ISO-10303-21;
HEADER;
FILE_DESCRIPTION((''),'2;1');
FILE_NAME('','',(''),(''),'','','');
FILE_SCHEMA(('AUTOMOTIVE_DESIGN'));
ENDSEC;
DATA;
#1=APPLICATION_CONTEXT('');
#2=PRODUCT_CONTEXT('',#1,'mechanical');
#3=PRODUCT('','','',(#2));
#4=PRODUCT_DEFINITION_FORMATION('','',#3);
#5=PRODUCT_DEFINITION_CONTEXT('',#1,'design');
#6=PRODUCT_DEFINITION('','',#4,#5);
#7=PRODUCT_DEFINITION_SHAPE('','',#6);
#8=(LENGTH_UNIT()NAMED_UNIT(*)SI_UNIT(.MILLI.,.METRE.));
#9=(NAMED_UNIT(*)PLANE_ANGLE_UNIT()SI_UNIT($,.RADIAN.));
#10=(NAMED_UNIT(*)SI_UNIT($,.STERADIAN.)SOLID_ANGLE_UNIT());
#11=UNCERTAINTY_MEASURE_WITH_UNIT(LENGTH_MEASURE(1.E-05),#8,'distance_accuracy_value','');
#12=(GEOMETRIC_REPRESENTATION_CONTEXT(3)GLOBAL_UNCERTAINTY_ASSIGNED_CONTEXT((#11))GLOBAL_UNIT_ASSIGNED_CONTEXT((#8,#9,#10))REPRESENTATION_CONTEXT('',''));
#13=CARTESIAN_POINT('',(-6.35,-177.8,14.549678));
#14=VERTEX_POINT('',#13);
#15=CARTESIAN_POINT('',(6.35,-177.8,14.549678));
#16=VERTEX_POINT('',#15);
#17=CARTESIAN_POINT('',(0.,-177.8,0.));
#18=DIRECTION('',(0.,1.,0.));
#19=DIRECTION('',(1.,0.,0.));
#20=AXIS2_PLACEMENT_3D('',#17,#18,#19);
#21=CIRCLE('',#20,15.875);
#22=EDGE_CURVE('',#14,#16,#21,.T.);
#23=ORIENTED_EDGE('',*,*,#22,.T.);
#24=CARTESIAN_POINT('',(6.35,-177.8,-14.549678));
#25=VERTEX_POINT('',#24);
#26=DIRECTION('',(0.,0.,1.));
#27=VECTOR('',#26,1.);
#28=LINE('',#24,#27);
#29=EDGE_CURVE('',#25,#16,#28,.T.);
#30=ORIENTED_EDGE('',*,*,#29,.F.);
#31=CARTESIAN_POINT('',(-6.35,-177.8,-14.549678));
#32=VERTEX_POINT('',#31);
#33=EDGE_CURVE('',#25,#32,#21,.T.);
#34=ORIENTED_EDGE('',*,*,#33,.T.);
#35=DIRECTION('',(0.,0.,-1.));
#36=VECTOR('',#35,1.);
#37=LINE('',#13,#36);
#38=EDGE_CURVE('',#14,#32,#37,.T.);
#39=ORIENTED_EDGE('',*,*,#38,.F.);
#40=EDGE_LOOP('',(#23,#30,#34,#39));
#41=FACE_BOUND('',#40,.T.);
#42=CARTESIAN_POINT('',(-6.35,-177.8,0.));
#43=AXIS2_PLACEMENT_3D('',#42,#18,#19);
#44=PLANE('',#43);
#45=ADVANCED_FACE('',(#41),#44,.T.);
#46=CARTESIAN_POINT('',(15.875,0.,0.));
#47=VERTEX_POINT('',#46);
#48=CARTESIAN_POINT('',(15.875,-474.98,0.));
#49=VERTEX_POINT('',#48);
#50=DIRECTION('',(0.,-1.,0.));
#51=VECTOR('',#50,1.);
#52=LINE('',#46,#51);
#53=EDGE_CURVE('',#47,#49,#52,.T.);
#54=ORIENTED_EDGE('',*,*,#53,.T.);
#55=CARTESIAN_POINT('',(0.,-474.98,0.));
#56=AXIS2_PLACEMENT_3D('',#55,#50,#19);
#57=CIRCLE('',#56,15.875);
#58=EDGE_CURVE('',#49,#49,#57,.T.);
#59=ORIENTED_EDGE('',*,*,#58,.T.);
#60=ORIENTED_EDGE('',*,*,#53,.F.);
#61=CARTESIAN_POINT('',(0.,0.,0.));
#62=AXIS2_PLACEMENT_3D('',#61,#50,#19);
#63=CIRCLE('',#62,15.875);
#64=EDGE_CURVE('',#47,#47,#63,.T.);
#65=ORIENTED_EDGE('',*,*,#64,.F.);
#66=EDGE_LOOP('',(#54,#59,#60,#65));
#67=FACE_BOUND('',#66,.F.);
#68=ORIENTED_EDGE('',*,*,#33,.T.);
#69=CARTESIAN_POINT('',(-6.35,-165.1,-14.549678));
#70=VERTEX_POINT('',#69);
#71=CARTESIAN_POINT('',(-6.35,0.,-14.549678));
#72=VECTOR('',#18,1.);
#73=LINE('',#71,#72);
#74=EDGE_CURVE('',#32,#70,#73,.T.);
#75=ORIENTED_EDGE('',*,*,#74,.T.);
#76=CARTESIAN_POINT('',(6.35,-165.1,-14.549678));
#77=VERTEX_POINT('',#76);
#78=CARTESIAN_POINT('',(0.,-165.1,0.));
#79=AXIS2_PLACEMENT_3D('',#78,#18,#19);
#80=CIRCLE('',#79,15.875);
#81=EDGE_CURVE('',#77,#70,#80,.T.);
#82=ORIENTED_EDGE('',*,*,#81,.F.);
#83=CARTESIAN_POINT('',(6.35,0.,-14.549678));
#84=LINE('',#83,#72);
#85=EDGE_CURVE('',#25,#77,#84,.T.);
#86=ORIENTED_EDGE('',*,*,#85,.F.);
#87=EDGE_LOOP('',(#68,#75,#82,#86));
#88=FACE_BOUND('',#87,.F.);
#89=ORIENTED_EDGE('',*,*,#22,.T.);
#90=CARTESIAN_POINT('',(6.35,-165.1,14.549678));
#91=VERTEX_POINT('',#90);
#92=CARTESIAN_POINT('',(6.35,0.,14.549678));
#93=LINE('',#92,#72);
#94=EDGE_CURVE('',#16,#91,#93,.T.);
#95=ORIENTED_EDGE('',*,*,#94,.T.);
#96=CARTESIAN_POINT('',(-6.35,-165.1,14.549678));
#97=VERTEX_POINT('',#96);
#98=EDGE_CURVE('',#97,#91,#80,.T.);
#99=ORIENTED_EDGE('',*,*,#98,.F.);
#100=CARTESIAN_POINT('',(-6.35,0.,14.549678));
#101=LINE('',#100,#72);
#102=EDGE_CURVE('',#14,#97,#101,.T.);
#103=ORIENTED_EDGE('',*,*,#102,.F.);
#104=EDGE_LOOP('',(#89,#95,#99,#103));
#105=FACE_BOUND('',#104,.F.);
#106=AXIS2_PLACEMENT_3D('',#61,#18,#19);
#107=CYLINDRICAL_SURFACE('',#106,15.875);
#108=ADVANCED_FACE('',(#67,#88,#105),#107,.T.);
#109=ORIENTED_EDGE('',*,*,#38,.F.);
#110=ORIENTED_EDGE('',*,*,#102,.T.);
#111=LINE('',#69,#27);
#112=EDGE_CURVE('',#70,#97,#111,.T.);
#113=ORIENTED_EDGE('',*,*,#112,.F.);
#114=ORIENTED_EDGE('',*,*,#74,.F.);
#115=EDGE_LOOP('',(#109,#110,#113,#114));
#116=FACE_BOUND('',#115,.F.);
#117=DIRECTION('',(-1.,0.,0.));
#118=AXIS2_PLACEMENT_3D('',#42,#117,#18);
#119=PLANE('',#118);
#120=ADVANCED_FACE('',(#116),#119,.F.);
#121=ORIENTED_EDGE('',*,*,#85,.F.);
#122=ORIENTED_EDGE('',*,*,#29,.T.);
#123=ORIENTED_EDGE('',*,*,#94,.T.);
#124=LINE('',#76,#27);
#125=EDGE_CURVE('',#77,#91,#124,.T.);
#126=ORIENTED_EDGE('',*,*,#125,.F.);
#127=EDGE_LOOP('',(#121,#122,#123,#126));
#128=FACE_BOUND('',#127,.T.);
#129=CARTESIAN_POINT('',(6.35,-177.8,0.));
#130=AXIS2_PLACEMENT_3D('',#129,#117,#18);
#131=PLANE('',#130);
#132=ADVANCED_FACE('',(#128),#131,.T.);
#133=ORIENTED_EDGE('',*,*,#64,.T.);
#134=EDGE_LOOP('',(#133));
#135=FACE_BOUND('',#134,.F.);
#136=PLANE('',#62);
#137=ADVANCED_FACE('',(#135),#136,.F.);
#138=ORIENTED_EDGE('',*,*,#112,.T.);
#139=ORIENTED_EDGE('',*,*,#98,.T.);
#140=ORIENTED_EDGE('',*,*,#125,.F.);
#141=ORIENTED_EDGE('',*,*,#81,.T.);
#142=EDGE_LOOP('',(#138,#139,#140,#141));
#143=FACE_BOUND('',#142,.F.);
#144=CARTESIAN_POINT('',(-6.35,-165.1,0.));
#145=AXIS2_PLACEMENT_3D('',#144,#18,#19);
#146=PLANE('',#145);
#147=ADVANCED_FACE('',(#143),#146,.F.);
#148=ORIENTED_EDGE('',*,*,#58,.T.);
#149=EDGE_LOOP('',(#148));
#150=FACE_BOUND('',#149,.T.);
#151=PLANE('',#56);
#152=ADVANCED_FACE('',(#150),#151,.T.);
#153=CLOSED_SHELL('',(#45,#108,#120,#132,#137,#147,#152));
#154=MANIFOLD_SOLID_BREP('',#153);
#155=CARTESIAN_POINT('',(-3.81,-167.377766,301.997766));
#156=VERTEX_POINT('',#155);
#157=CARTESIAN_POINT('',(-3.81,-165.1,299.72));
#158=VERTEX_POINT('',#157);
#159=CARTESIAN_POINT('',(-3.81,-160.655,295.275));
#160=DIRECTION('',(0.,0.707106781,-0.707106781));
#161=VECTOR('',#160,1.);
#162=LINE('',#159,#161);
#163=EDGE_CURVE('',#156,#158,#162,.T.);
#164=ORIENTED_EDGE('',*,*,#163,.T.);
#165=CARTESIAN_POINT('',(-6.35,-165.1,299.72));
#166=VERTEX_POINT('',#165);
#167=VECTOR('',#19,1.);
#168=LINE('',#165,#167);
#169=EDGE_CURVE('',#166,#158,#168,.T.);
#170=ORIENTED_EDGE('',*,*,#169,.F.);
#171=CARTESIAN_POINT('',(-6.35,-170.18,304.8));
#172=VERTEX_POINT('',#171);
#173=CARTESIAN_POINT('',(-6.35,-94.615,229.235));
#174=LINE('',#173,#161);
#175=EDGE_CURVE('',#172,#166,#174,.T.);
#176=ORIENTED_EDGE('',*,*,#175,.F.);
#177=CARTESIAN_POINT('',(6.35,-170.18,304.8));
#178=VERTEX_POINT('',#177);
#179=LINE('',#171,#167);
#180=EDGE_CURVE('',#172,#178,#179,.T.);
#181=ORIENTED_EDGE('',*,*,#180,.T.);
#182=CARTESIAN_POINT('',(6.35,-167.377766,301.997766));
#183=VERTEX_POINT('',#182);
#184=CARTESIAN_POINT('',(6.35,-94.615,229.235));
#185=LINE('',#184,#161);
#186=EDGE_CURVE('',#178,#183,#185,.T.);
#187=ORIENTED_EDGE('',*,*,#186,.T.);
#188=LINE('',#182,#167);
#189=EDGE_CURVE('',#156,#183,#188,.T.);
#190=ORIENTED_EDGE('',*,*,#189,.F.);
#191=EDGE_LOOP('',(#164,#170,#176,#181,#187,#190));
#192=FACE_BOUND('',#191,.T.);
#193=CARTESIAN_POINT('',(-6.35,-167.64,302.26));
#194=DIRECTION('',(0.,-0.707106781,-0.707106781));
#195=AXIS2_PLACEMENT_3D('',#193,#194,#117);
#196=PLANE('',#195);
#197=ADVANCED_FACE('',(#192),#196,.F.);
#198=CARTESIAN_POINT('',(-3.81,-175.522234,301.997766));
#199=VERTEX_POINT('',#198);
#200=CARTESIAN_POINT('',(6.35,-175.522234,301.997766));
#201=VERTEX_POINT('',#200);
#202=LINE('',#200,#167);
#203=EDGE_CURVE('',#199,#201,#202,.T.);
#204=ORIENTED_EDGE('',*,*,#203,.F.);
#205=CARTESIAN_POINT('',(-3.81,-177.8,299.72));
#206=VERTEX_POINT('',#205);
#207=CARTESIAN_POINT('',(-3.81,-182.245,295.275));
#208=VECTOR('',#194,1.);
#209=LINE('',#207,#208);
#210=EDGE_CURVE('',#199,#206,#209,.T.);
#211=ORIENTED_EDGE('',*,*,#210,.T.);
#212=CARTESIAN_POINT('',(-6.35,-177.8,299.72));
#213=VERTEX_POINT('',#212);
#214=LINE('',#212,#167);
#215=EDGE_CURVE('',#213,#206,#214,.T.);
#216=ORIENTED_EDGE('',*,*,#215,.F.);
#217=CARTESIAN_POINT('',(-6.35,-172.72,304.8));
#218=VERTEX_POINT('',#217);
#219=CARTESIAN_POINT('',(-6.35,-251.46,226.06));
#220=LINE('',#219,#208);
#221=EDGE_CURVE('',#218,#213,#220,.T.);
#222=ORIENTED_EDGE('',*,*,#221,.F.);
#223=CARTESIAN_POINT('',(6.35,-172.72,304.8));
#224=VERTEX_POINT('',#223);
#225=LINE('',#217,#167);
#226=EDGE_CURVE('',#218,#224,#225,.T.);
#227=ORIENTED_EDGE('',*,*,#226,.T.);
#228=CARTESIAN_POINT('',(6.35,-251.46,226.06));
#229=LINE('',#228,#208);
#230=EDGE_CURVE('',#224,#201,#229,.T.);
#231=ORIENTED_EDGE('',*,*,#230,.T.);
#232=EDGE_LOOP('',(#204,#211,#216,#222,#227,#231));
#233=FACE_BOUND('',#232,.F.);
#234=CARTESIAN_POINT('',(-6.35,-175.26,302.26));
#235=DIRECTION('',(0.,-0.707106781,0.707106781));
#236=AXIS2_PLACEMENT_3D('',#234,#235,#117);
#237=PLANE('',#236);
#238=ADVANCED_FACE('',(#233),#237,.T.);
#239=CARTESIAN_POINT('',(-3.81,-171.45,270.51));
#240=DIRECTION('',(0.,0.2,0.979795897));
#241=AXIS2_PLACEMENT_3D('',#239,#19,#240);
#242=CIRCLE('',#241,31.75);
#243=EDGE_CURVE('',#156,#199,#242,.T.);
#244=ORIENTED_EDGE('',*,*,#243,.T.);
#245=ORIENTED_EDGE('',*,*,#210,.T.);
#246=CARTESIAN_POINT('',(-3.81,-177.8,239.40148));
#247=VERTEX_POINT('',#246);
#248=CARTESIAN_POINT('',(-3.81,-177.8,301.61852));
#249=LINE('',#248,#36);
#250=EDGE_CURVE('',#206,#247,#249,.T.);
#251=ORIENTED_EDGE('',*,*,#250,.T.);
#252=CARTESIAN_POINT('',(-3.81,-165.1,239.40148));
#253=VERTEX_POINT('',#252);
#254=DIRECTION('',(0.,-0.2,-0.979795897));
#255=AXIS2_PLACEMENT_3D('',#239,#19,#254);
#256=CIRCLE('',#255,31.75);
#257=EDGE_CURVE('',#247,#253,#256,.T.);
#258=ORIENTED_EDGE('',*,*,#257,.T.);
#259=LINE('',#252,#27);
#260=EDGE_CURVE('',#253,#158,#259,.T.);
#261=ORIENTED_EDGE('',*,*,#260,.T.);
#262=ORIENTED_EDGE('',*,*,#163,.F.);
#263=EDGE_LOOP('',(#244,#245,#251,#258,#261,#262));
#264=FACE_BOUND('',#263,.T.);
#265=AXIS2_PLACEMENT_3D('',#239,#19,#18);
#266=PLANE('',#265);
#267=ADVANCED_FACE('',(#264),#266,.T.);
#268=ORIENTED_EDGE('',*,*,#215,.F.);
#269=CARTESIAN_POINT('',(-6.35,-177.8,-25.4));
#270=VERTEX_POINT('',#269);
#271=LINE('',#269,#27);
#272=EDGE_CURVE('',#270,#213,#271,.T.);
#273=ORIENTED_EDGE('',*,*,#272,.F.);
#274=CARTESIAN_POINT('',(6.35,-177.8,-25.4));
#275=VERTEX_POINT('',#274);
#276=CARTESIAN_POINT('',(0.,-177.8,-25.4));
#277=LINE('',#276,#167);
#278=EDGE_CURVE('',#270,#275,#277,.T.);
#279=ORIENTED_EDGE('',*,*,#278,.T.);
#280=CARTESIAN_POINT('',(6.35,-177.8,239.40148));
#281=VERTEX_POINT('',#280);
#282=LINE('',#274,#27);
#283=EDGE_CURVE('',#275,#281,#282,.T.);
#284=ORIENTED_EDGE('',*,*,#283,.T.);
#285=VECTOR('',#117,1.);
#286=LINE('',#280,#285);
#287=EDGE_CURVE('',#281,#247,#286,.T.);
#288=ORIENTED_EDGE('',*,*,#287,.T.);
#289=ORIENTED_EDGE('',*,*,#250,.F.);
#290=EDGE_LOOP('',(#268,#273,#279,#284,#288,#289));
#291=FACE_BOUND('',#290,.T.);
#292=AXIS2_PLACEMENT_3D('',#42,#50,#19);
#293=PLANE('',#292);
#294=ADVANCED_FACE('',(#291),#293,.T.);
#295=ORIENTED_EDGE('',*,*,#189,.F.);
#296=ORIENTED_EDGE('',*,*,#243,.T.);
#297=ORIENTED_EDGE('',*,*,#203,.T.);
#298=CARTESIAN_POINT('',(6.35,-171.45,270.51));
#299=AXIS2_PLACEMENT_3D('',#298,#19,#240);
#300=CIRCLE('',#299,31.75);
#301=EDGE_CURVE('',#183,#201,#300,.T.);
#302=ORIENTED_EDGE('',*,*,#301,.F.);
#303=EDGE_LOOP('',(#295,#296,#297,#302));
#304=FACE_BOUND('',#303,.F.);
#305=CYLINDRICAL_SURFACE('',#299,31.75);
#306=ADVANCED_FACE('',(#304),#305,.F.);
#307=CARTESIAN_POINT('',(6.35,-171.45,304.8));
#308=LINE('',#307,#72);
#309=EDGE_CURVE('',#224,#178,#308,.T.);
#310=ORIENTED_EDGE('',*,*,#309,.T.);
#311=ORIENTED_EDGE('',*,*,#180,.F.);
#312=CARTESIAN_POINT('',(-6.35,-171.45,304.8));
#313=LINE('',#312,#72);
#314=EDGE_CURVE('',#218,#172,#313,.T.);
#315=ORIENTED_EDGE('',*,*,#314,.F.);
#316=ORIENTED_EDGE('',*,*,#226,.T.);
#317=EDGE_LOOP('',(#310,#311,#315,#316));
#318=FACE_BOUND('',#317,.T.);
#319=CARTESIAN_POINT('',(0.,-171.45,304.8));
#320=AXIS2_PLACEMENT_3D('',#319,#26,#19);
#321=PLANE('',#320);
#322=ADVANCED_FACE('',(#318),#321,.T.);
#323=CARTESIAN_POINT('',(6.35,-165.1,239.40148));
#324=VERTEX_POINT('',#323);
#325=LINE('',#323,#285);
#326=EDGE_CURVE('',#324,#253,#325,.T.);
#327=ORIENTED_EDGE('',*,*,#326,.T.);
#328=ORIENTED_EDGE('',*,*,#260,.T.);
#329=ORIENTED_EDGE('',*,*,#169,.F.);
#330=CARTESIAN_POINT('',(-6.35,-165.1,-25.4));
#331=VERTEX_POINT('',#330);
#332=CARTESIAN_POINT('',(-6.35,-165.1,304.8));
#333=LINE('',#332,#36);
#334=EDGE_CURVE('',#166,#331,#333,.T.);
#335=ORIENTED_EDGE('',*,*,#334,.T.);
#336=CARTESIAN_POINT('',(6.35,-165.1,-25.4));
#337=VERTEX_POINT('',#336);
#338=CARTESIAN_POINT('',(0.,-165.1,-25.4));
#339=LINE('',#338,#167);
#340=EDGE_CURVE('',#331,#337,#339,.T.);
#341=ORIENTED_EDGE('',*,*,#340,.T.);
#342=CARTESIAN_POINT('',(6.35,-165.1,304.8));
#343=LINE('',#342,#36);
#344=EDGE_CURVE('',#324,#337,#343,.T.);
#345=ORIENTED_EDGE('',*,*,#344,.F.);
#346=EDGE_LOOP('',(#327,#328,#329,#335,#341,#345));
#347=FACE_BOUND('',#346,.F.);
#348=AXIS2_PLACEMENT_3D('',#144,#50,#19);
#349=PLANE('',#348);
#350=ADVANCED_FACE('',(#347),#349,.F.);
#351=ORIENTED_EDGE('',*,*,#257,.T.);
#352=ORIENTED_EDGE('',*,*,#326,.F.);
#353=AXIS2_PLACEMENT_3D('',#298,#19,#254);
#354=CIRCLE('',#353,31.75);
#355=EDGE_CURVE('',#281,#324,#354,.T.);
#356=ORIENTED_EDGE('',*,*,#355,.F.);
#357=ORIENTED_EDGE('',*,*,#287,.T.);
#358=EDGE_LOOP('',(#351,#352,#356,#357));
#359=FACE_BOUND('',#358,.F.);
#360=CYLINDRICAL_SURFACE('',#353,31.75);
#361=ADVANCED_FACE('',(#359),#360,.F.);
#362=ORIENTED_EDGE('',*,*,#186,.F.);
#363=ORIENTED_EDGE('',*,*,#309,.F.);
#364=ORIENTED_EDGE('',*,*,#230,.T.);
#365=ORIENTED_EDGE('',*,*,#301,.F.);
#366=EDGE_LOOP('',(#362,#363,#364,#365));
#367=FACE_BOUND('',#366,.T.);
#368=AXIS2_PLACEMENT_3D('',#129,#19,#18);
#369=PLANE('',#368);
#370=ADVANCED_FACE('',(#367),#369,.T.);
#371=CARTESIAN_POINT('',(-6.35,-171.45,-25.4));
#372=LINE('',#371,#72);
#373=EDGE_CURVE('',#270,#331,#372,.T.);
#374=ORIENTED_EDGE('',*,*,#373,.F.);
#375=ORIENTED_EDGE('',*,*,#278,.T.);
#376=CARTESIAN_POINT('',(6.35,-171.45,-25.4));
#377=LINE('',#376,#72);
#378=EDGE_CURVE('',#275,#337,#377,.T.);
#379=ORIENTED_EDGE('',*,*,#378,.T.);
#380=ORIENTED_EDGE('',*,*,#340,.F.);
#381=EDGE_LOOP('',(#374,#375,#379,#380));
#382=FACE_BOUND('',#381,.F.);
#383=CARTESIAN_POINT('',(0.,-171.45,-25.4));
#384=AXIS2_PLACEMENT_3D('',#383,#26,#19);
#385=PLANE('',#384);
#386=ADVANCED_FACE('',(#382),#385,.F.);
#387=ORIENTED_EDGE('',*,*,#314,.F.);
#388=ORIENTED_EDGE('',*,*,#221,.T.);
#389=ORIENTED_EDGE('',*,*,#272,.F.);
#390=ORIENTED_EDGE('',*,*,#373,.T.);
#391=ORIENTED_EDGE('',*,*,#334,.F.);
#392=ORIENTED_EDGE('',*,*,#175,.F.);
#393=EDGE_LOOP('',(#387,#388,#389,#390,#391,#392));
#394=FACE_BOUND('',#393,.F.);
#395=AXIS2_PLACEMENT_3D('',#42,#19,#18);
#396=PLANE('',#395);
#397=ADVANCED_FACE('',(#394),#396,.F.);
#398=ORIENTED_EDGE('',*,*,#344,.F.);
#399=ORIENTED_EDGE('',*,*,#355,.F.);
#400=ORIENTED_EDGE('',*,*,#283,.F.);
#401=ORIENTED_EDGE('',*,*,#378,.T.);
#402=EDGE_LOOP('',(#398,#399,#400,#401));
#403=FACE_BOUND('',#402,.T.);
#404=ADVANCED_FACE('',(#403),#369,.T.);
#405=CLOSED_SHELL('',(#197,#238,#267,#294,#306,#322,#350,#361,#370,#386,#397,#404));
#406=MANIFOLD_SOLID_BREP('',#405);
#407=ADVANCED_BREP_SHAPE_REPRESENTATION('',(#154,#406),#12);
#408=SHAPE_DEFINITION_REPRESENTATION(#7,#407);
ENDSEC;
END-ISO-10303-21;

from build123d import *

# Parameters (mm, degrees)
F0_R          = 15.875
F1_DEPTH      = 474.98
F2_W          = 12.7
F2_H          = 12.7
F3_DEPTH      = 15.876
F3_DEPTH_BACK = 15.876
F4_DEPTH      = 304.8
F4_DEPTH_BACK = 25.4
F6_SIZE       = 5.08
F7_DEPTH      = 10.16


with BuildPart() as f1:
    # F0 (on Front) → F1 (new body)
    with BuildSketch(Plane.XZ):
        Circle(F0_R)
    extrude(amount=F1_DEPTH)

    # F2 (on Top) → F3 (cut, two sides)
    with BuildSketch(Plane.XY) as f3_sk:
        with Locations((0, -171.45)):
            Rectangle(F2_W, F2_H)
    extrude(amount=-F3_DEPTH, mode=Mode.SUBTRACT)
    extrude(f3_sk.sketch, amount=F3_DEPTH_BACK, mode=Mode.SUBTRACT)


with BuildPart() as f4:
    # F2 (on Top) → F4 (new body, two sides)
    with BuildSketch(Plane.XY) as f4_sk:
        with Locations((0, -171.45)):
            Rectangle(F2_W, F2_H)
    extrude(amount=F4_DEPTH)
    extrude(f4_sk.sketch, amount=-F4_DEPTH_BACK)

    # F6
    f6_edges = [f4.edges().sort_by_distance(p)[0] for p in [
        (0, -177.8, 304.8),
        (0, -165.1, 304.8),
    ]]
    chamfer(f6_edges, length=F6_SIZE)

    # F5 (on face) → F7 (cut)
    with BuildSketch(Plane.YZ.offset(6.35)):
        with BuildLine():
            Line((-165.1, 239.4014802667), (-165.1, 301.6185197333))
            ThreePointArc((-165.1, 301.6185197333), (-171.45, 302.26), (-177.8, 301.6185197333))
            Line((-177.8, 301.6185197333), (-177.8, 239.4014802667))
            ThreePointArc((-177.8, 239.4014802667), (-171.45, 238.76), (-165.1, 239.4014802667))
        make_face()
    extrude(amount=-F7_DEPTH, mode=Mode.SUBTRACT)


solid = Compound([f1.part, f4.part])
